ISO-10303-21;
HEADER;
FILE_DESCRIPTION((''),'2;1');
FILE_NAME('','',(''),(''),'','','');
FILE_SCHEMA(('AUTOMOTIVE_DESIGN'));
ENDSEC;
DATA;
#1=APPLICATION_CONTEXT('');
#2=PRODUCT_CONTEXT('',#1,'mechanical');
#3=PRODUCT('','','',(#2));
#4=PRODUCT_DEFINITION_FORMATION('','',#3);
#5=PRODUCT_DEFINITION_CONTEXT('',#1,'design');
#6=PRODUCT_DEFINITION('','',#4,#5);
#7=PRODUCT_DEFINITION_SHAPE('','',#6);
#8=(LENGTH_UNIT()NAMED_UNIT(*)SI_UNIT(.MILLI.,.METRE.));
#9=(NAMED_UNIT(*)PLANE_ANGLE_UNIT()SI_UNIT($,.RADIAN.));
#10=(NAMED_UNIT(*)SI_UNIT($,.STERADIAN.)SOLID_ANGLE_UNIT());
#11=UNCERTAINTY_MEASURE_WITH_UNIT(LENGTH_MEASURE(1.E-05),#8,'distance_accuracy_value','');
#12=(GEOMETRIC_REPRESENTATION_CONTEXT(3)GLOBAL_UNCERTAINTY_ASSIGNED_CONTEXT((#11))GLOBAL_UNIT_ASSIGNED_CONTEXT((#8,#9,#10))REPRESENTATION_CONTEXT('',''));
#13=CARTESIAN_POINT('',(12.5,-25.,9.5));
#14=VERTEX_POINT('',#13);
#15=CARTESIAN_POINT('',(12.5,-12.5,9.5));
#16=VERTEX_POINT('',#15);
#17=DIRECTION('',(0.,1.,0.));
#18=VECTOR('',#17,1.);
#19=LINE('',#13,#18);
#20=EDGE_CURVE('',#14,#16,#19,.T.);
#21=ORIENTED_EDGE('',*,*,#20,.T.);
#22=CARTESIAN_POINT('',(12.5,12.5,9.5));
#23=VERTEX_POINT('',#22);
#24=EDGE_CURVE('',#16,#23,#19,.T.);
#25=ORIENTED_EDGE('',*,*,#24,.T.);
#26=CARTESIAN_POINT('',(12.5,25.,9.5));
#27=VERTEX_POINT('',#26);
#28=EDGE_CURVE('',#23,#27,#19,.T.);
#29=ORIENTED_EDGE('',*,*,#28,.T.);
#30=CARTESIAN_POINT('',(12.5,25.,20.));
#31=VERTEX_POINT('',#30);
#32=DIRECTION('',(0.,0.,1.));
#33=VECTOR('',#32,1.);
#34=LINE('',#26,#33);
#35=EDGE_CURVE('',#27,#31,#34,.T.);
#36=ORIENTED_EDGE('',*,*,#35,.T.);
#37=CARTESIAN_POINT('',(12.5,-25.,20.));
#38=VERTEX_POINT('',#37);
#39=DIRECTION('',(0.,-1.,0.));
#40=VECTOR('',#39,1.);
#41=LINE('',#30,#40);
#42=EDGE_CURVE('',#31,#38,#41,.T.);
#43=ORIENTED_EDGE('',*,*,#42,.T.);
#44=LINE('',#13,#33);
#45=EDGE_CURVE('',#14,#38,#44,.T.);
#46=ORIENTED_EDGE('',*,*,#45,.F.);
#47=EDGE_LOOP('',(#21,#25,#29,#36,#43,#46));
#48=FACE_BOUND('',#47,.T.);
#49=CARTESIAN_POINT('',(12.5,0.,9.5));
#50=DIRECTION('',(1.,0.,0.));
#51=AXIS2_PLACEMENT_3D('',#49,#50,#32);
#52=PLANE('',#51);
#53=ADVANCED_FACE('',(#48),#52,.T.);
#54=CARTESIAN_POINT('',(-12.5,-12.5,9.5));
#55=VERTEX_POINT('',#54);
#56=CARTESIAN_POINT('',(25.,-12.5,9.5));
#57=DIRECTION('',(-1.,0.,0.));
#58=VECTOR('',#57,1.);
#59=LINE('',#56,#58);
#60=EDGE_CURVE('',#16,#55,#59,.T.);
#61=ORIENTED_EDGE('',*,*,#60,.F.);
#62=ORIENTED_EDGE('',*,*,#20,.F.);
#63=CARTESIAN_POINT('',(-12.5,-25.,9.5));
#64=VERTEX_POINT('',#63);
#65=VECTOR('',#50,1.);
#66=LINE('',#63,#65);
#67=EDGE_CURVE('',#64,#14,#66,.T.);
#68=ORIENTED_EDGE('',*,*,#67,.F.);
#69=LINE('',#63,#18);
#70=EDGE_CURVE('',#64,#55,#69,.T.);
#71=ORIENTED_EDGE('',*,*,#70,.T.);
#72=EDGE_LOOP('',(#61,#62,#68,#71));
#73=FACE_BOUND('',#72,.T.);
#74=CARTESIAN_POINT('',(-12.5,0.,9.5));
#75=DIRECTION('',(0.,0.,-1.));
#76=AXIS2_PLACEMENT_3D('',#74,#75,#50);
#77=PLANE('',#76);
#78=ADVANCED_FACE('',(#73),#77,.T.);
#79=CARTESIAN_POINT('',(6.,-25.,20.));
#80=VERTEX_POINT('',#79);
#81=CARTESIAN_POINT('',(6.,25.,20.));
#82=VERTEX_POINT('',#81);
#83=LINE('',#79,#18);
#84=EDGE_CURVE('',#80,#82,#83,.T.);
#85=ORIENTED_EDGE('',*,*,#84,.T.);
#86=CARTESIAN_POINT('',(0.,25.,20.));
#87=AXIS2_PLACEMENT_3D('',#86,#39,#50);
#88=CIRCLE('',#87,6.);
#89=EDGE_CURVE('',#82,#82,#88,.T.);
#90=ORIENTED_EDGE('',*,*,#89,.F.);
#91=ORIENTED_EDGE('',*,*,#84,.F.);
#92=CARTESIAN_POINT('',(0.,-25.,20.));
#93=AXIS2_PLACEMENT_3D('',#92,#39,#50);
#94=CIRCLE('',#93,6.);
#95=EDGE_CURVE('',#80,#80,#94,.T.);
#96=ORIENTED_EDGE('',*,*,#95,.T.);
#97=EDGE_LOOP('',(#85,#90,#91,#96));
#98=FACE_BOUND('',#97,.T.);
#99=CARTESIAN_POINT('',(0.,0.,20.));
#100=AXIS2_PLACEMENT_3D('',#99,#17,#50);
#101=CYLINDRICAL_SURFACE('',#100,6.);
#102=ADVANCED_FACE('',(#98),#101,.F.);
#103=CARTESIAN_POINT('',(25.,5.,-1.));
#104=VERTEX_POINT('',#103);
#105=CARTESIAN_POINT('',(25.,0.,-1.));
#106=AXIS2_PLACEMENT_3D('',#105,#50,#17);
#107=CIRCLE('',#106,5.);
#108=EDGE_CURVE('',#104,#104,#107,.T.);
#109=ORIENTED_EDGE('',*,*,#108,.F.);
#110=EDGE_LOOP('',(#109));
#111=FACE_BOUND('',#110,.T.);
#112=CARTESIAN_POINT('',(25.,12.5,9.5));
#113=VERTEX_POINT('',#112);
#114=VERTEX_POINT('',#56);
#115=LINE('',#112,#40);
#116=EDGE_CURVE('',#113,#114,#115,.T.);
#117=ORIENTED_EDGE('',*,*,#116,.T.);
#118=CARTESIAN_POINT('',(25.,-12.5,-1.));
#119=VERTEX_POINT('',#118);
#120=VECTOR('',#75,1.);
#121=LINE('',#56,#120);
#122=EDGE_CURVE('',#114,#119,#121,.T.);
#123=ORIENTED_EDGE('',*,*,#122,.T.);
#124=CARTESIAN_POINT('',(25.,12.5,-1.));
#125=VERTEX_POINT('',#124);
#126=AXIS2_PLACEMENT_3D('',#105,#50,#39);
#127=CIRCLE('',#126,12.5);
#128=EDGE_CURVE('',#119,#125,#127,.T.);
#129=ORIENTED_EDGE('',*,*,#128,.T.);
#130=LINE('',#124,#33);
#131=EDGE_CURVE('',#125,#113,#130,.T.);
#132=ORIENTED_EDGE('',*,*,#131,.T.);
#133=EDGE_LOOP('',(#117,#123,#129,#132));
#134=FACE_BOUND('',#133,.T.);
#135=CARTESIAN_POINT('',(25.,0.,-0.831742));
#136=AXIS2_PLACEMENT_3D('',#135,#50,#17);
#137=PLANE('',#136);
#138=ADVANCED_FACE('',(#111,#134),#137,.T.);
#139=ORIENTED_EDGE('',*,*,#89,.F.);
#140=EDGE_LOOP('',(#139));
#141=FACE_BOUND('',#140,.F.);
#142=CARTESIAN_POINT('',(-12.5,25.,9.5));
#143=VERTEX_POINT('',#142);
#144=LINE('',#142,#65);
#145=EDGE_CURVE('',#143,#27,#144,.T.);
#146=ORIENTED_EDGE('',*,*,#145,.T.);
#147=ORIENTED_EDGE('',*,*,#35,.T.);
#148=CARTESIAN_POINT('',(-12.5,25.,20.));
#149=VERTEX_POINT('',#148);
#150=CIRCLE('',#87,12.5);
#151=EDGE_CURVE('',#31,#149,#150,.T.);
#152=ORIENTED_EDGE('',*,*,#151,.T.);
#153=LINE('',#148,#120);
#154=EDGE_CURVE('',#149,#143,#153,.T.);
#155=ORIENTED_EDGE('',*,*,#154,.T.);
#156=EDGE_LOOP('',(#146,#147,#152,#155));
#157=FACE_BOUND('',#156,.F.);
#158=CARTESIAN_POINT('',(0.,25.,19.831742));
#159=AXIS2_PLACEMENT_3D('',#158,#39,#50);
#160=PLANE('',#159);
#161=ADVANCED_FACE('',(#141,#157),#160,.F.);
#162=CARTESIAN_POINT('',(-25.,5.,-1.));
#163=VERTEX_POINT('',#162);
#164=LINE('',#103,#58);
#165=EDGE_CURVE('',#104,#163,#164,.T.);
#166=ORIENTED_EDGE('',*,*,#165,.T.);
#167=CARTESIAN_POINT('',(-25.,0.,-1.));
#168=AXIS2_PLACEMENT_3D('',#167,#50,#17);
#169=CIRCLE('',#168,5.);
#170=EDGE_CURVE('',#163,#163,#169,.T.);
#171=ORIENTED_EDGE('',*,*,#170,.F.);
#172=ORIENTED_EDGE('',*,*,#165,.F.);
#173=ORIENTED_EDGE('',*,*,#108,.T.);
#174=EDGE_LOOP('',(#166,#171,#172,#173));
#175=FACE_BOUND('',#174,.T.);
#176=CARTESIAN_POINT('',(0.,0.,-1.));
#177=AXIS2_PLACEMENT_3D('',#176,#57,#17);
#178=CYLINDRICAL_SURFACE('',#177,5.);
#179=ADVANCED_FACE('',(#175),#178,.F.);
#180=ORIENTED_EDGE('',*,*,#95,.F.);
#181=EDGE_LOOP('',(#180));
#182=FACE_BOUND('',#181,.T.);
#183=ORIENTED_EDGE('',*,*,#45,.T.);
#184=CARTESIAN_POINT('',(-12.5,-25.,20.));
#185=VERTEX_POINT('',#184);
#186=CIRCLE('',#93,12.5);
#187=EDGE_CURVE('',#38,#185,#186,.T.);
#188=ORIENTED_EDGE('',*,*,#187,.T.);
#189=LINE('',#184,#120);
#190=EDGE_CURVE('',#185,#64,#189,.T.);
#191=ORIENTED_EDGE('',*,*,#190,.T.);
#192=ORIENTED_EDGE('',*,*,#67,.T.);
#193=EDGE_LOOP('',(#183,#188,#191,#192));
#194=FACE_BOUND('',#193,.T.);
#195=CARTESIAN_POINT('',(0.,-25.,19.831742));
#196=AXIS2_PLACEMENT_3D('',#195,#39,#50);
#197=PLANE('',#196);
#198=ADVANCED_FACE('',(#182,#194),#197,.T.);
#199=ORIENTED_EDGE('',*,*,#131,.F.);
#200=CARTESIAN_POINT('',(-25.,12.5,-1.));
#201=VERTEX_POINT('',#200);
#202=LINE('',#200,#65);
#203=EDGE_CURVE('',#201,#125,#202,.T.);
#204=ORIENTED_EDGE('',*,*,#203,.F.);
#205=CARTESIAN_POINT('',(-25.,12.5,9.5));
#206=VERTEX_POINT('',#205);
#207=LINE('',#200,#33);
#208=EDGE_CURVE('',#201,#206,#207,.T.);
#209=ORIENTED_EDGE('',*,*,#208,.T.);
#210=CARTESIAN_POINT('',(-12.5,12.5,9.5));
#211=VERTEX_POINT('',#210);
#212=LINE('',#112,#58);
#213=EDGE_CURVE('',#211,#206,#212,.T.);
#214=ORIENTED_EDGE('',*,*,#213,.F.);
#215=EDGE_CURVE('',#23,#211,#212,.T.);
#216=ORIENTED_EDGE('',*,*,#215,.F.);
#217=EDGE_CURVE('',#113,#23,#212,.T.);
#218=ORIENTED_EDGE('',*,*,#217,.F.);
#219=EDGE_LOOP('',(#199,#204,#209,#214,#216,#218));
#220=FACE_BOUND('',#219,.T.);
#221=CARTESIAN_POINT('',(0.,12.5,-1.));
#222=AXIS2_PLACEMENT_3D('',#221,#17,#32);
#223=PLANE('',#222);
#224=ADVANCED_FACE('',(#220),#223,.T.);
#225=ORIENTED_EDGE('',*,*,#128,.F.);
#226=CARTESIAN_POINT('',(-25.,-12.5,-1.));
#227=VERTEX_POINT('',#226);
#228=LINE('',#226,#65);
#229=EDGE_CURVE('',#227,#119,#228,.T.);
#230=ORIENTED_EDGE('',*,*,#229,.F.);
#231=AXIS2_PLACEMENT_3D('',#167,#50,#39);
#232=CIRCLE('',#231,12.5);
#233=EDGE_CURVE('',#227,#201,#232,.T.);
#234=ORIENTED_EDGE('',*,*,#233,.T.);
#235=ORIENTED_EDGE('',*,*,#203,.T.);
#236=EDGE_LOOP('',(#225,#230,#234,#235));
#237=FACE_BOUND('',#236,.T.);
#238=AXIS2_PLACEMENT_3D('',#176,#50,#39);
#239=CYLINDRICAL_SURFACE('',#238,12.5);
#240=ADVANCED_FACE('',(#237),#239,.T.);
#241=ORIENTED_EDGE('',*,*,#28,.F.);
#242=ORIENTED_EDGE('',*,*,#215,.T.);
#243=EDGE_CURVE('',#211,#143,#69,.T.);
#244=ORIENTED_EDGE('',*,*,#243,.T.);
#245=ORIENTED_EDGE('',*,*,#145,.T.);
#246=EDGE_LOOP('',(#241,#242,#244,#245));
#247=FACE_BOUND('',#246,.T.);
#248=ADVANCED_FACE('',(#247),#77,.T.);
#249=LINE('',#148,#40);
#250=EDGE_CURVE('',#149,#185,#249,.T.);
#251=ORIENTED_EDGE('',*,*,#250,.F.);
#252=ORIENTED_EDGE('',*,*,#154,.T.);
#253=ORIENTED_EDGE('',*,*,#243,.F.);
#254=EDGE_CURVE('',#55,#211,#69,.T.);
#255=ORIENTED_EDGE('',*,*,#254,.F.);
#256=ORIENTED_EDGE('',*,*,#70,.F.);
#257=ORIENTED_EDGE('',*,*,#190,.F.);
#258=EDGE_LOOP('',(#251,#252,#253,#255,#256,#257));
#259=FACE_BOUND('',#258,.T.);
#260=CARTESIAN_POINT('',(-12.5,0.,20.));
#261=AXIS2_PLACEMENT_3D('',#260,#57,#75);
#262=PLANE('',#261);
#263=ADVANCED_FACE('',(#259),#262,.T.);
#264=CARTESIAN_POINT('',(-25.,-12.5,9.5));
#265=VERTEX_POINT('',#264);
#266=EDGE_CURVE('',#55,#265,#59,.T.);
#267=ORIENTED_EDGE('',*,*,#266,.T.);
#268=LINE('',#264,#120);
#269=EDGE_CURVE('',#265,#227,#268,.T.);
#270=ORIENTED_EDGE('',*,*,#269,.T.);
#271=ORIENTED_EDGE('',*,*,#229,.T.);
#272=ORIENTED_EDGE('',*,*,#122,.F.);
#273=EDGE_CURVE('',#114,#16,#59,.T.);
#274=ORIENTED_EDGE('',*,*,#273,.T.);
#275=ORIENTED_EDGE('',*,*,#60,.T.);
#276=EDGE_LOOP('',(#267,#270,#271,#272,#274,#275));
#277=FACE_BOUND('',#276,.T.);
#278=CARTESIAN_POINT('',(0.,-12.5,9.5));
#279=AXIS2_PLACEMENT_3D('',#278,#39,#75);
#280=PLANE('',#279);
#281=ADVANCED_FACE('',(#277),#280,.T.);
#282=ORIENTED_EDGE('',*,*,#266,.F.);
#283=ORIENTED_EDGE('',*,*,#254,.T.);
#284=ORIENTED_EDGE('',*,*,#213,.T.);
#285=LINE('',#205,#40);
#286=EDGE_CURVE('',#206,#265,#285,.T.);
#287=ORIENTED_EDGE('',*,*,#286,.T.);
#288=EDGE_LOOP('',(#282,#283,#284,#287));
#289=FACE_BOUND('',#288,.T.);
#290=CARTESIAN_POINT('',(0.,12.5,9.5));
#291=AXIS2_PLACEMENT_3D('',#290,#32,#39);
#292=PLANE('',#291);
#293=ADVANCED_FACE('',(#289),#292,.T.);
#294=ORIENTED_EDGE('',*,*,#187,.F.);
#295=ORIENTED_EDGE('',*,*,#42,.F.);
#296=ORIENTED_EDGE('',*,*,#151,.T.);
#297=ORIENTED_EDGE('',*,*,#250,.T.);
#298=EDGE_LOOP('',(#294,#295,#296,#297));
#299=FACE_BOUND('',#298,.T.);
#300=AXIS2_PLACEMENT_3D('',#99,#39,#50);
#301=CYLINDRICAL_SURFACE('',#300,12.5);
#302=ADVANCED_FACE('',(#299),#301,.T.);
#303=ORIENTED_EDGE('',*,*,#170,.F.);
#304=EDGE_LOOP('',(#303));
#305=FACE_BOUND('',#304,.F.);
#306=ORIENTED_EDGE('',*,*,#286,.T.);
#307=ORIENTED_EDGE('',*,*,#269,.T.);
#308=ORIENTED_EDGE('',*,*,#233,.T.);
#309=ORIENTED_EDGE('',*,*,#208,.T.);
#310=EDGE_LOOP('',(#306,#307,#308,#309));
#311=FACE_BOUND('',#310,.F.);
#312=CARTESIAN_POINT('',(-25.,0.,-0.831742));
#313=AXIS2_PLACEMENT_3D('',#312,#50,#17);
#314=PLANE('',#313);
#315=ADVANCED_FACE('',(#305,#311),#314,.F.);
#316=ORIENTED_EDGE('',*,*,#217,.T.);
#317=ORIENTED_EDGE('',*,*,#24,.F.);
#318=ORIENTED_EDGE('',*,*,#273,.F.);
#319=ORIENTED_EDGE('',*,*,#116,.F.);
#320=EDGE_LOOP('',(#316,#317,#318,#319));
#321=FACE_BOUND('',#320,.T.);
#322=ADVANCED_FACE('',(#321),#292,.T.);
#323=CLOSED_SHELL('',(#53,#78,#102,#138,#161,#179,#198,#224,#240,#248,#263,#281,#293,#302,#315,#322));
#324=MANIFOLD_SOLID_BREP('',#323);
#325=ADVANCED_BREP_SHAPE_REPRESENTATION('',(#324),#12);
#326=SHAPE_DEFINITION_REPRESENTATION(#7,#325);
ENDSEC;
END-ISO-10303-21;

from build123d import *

# Parameters (mm, degrees)
F0_R     = 6
F1_DEPTH = 25
F2_R     = 5
F3_DEPTH = 25


# Not quite as in the source:
# - a feature names something its author has since deleted; it is built from what else it names


with BuildPart() as f1:
    # F0 (on Front) → F1 (new body, symmetric)
    with BuildSketch(Plane.XZ):
        with BuildLine():
            ThreePointArc((6.7823299831, 9.5), (10.9779124789, 14.0220875211), (12.5, 20))
            ThreePointArc((12.5, 20), (0, 32.5), (-12.5, 20))
            ThreePointArc((-12.5, 20), (-10.9779124789, 14.0220875211), (-6.7823299831, 9.5))
            Line((-6.7823299831, 9.5), (6.7823299831, 9.5))
        make_face()
        with Locations((0, 20)):
            Circle(F0_R, mode=Mode.SUBTRACT)
        with BuildLine():
            Line((12.5, 9.5), (12.5, 20))
            ThreePointArc((12.5, 20), (10.9779124789, 14.0220875211), (6.7823299831, 9.5))
            Line((6.7823299831, 9.5), (12.5, 9.5))
        make_face()
        with BuildLine():
            ThreePointArc((-6.7823299831, 9.5), (-10.9779124789, 14.0220875211), (-12.5, 20))
            Line((-12.5, 20), (-12.5, 9.5))
            Line((-12.5, 9.5), (-6.7823299831, 9.5))
        make_face()
    extrude(amount=F1_DEPTH, both=True)

    # F2 (on Right) → F3 (join, symmetric)
    with BuildSketch(Plane.YZ):
        with BuildLine():
            ThreePointArc((-6.7823299831, 9.5), (-10.9779124789, 4.9779124789), (-12.5, -1))
            ThreePointArc((-12.5, -1), (0, -13.5), (12.5, -1))
            ThreePointArc((12.5, -1), (10.9779124789, 4.9779124789), (6.7823299831, 9.5))
            Line((6.7823299831, 9.5), (-6.7823299831, 9.5))
        make_face()
        with Locations((0, -1)):
            Circle(F2_R, mode=Mode.SUBTRACT)
        with BuildLine():
            Line((-12.5, 9.5), (-12.5, -1))
            ThreePointArc((-12.5, -1), (-10.9779124789, 4.9779124789), (-6.7823299831, 9.5))
            Line((-6.7823299831, 9.5), (-12.5, 9.5))
        make_face()
        with BuildLine():
            ThreePointArc((6.7823299831, 9.5), (10.9779124789, 4.9779124789), (12.5, -1))
            Line((12.5, -1), (12.5, 9.5))
            Line((12.5, 9.5), (6.7823299831, 9.5))
        make_face()
    extrude(amount=F3_DEPTH, both=True)


solid = f1.part
